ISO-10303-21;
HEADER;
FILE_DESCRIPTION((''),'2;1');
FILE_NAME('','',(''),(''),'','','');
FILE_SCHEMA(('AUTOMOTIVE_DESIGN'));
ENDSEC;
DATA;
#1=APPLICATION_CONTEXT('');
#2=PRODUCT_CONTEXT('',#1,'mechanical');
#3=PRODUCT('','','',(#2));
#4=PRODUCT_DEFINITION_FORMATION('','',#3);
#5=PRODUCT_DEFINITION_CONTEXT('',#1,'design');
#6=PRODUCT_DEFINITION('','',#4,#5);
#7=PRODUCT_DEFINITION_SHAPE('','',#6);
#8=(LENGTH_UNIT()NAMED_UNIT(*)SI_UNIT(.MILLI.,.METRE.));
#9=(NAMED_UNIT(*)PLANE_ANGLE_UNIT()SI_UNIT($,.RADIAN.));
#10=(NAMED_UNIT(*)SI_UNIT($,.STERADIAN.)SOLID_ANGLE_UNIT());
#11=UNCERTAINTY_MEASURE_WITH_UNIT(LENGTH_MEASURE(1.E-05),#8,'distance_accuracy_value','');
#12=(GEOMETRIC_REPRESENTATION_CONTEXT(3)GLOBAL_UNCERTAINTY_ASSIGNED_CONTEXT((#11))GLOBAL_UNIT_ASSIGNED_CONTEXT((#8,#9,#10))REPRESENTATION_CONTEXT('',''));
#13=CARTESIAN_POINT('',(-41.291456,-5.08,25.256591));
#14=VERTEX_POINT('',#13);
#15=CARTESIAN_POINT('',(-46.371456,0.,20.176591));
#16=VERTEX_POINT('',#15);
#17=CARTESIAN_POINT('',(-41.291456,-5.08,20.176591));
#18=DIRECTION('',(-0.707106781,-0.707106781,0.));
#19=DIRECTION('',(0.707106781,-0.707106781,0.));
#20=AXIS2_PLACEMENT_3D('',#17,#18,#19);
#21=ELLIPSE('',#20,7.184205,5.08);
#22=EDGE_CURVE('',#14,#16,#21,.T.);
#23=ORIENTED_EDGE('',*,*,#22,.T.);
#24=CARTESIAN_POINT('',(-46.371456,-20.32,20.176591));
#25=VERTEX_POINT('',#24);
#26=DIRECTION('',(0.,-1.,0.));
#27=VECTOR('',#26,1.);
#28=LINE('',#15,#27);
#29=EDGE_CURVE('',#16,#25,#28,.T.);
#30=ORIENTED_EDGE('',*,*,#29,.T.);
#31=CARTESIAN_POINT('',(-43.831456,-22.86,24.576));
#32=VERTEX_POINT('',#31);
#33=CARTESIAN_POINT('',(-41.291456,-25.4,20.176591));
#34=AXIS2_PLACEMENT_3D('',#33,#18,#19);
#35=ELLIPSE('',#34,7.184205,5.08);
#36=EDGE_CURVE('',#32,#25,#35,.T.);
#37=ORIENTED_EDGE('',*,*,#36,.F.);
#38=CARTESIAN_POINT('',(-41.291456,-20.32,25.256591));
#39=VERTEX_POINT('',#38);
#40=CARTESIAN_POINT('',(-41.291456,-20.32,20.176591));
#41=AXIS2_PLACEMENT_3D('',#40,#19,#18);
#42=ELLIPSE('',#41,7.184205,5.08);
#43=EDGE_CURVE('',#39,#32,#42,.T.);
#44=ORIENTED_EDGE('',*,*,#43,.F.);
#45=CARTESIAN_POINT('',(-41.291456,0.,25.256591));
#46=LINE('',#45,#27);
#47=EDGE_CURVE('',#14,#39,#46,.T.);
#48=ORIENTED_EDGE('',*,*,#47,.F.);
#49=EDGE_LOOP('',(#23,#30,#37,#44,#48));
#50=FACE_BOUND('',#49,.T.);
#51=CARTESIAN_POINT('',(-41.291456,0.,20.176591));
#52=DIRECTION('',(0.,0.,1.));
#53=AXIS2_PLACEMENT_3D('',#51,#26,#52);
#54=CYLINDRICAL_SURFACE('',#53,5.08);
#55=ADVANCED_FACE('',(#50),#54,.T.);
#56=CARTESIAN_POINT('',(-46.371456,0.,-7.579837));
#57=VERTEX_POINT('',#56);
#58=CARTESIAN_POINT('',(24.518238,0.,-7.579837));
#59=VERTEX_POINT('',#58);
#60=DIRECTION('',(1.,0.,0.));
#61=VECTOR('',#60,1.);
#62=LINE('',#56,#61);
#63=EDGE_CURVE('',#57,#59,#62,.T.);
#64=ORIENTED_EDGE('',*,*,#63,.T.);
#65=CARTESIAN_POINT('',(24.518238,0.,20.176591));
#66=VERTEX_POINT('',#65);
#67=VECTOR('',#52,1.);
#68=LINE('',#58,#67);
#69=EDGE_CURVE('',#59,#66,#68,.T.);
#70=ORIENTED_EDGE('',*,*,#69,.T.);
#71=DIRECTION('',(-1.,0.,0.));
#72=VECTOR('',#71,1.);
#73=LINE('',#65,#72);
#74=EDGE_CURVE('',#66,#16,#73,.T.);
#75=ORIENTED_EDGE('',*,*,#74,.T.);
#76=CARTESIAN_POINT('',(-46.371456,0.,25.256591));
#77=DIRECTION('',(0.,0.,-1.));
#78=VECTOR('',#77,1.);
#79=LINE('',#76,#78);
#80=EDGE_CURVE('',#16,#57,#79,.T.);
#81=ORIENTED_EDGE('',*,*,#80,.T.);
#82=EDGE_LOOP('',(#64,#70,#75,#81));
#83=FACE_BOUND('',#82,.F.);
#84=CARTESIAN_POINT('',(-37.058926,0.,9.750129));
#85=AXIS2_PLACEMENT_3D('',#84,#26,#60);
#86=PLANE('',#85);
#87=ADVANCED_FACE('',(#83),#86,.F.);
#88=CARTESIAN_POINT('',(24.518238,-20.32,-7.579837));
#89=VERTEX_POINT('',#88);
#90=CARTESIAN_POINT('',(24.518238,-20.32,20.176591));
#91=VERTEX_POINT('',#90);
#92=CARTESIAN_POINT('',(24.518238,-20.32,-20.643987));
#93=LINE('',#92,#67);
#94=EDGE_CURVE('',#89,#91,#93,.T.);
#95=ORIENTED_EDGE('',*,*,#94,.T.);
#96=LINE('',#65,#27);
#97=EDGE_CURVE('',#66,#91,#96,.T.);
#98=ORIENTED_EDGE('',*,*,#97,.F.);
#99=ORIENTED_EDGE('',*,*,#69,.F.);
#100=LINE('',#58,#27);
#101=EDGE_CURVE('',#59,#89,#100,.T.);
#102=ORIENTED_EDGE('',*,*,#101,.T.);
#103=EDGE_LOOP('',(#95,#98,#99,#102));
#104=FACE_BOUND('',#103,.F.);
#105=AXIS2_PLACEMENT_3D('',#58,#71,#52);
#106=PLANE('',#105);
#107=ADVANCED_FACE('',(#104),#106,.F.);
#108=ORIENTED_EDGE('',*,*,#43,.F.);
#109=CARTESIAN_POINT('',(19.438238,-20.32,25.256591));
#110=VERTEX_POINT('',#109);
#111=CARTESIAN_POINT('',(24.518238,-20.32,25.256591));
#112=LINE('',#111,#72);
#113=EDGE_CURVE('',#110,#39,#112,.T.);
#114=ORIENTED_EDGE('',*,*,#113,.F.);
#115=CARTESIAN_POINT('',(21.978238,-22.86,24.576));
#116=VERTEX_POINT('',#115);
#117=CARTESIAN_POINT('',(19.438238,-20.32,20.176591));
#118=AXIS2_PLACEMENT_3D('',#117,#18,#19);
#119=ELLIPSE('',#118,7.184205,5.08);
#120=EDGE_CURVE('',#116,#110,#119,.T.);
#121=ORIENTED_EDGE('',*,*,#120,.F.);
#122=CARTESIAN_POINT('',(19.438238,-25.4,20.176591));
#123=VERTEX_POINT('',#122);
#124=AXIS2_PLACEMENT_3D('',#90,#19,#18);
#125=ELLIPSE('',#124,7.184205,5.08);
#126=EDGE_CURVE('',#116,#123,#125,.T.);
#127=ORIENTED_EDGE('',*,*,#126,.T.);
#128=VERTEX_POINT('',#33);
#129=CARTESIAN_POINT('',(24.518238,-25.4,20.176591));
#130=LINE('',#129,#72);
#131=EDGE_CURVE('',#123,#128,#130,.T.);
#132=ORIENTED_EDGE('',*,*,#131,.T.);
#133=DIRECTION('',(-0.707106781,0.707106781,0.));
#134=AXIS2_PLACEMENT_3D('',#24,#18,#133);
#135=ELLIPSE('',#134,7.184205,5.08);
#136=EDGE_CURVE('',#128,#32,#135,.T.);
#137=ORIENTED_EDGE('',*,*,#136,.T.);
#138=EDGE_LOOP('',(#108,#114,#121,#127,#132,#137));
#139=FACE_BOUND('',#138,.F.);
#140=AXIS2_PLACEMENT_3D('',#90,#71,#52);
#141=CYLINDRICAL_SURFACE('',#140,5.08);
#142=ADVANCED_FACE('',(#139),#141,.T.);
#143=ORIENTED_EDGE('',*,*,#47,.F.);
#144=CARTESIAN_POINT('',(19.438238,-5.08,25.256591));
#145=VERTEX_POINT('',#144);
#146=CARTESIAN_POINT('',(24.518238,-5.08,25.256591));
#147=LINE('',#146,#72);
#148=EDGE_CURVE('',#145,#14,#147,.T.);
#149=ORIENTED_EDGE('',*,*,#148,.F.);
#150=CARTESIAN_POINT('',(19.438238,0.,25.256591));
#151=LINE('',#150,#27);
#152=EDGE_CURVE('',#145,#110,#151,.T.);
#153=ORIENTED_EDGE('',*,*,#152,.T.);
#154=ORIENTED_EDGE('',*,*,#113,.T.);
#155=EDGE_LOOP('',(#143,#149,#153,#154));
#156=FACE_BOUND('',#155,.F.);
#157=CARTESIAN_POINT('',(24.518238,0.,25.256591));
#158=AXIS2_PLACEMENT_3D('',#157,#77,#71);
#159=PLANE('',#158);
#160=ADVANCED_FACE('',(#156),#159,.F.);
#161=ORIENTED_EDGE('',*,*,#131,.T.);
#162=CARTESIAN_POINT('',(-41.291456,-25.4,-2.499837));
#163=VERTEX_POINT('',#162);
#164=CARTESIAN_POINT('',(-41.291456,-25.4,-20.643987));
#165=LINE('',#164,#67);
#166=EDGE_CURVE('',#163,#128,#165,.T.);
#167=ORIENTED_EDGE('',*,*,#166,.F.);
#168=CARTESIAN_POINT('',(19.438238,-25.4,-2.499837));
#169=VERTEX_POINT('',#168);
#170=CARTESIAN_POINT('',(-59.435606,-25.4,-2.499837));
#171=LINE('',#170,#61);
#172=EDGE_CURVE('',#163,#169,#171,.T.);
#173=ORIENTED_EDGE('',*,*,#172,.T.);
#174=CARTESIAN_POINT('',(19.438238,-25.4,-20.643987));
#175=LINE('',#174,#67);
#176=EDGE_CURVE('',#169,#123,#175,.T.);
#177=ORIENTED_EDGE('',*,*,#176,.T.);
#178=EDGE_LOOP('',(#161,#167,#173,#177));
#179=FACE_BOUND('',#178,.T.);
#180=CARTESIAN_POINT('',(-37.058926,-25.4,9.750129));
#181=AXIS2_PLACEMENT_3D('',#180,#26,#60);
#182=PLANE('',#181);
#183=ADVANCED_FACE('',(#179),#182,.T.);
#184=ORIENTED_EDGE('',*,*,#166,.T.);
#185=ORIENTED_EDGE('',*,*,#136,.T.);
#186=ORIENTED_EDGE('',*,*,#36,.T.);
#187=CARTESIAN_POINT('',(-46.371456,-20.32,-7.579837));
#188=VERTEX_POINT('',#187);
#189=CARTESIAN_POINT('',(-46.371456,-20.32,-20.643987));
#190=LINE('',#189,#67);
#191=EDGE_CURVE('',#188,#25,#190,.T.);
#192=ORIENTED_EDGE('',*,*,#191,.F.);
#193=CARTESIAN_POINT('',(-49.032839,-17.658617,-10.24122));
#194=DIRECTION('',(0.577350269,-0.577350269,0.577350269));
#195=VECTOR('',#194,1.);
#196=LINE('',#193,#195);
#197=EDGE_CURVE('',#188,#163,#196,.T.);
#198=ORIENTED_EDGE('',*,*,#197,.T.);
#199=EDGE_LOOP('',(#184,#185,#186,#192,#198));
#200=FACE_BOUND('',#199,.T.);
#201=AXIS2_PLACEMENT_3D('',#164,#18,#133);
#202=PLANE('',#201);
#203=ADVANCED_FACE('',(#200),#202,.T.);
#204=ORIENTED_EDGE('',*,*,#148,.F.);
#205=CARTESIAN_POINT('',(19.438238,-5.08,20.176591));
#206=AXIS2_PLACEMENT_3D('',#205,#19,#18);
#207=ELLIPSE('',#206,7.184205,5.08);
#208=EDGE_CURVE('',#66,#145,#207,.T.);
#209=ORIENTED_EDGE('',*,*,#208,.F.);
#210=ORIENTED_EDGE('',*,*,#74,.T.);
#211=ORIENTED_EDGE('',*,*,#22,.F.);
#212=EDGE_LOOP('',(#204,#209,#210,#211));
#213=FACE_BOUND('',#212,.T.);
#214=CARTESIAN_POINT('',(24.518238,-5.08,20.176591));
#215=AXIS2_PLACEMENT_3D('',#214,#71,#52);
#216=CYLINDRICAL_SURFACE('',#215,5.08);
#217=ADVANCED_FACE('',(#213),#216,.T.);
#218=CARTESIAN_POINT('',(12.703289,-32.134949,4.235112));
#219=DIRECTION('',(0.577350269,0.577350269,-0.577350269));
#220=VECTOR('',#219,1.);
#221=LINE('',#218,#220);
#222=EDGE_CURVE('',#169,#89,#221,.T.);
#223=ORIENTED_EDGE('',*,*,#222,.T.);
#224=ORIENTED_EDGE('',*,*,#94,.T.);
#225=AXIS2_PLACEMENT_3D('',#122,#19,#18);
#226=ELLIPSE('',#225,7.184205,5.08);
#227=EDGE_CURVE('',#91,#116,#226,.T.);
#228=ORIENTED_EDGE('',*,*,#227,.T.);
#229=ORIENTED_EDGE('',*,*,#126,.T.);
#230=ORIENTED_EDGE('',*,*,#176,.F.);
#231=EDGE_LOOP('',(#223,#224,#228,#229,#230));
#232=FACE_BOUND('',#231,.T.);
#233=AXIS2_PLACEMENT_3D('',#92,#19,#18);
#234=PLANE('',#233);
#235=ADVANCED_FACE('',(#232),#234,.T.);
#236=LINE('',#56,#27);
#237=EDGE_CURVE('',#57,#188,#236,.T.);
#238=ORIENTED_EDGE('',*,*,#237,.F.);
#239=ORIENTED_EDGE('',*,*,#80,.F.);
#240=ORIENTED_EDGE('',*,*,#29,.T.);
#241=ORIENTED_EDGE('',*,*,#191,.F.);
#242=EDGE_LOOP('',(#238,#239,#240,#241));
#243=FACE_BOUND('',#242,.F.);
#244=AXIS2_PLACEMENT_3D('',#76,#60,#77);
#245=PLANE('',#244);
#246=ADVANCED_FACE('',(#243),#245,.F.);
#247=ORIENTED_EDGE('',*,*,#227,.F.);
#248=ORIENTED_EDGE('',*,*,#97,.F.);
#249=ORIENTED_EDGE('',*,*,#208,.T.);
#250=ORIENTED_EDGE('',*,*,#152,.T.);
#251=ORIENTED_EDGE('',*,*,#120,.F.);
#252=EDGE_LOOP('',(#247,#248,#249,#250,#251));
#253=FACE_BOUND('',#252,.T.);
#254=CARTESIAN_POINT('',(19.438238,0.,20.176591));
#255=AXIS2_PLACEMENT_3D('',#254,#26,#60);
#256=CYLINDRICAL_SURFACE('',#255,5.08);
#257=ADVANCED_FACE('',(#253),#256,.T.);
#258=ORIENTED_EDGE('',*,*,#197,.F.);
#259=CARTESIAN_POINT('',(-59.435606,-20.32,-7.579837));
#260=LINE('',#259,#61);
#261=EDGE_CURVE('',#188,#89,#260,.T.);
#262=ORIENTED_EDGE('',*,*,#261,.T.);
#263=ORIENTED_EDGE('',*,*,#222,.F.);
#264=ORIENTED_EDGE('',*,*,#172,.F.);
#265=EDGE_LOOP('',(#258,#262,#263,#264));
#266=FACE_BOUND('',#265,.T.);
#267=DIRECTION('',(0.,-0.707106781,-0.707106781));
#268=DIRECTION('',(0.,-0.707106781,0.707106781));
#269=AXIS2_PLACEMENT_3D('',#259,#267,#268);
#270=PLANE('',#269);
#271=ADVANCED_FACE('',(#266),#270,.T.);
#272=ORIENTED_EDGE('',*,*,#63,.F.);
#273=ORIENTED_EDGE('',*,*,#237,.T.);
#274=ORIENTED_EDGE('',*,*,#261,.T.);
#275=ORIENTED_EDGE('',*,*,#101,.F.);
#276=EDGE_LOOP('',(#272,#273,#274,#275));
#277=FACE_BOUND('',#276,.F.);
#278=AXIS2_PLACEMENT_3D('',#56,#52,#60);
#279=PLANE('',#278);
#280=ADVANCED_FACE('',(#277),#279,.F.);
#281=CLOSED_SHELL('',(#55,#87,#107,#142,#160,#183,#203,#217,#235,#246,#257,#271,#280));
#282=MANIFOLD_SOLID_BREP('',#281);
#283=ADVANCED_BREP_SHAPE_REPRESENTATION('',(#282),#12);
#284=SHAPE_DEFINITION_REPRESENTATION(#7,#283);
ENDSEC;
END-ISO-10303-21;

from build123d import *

# Parameters (mm, degrees)
F1_DEPTH    = 25.4
F2_R        = 5.08
F3_T1_DEPTH = 53.8847270698
F3_T3_DEPTH = 97.0179937739


# Not quite as in the source:
# - a fillet or chamfer that OpenCascade refuses, or shapes differently, is made with other operations: its cross-section is extruded or revolved along the edge and cut away or added


with BuildPart() as f1:
    # F0 (on Front) → F1 (new body)
    with BuildSketch(Plane.XZ):
        with BuildLine():
            ThreePointArc((-26.0082527554, 9.7501287237), (-33.751696872, 20.4773638636), (-46.3714562356, 16.5054406347))
            Line((-46.3714562356, 16.5054406347), (-46.3714562356, 2.9948168126))
            ThreePointArc((-46.3714562356, 2.9948168126), (-33.751696872, -0.9771064163), (-26.0082527554, 9.7501287237))
        make_face()
        with BuildLine():
            Line((24.5182383806, 25.2565909177), (-46.3714562356, 25.2565909177))
            Line((-46.3714562356, 25.2565909177), (-46.3714562356, 16.5054406347))
            ThreePointArc((-46.3714562356, 16.5054406347), (-33.751696872, 20.4773638636), (-26.0082527554, 9.7501287237))
            ThreePointArc((-26.0082527554, 9.7501287237), (-33.751696872, -0.9771064163), (-46.3714562356, 2.9948168126))
            Line((-46.3714562356, 2.9948168126), (-46.3714562356, -7.5798369944))
            Line((-46.3714562356, -7.5798369944), (24.5182383806, -7.5798369944))
            Line((24.5182383806, -7.5798369944), (24.5182383806, 25.2565909177))
        make_face()
    extrude(amount=F1_DEPTH)

    # F2
    f2_edges = [f1.edges().sort_by_distance(p)[0] for p in [
        (24.518238, -12.7, 25.256591),
        (-46.371456, -12.7, 25.256591),
        (-10.926609, 0, 25.256591),
        (-10.926609, -25.4, 25.256591),
    ]]
    fillet(f2_edges, radius=F2_R)

    # F3: chamfer of 5.08 on 4 edges, made by hand

    # F3_s2 → F3_t1 (cut)
    with BuildSketch(Plane.XY.offset(-20.6439865733)):
        Polygon((-41.2914562356, -25.4), (-46.3714562356, -20.32), (-46.3714562356, -25.4), align=None)
        Polygon((24.5182383806, -20.32), (19.4382383806, -25.4), (24.5182383806, -25.4), align=None)
    extrude(amount=F3_T1_DEPTH, mode=Mode.SUBTRACT)

    # F3_s4 → F3_t3 (cut)
    with BuildSketch(Plane.YZ.offset(-59.4356058145)):
        Polygon((-20.32, -7.5798369944), (-25.4, -2.4998369944), (-25.4, -7.5798369944), align=None)
    extrude(amount=F3_T3_DEPTH, mode=Mode.SUBTRACT)


solid = f1.part
